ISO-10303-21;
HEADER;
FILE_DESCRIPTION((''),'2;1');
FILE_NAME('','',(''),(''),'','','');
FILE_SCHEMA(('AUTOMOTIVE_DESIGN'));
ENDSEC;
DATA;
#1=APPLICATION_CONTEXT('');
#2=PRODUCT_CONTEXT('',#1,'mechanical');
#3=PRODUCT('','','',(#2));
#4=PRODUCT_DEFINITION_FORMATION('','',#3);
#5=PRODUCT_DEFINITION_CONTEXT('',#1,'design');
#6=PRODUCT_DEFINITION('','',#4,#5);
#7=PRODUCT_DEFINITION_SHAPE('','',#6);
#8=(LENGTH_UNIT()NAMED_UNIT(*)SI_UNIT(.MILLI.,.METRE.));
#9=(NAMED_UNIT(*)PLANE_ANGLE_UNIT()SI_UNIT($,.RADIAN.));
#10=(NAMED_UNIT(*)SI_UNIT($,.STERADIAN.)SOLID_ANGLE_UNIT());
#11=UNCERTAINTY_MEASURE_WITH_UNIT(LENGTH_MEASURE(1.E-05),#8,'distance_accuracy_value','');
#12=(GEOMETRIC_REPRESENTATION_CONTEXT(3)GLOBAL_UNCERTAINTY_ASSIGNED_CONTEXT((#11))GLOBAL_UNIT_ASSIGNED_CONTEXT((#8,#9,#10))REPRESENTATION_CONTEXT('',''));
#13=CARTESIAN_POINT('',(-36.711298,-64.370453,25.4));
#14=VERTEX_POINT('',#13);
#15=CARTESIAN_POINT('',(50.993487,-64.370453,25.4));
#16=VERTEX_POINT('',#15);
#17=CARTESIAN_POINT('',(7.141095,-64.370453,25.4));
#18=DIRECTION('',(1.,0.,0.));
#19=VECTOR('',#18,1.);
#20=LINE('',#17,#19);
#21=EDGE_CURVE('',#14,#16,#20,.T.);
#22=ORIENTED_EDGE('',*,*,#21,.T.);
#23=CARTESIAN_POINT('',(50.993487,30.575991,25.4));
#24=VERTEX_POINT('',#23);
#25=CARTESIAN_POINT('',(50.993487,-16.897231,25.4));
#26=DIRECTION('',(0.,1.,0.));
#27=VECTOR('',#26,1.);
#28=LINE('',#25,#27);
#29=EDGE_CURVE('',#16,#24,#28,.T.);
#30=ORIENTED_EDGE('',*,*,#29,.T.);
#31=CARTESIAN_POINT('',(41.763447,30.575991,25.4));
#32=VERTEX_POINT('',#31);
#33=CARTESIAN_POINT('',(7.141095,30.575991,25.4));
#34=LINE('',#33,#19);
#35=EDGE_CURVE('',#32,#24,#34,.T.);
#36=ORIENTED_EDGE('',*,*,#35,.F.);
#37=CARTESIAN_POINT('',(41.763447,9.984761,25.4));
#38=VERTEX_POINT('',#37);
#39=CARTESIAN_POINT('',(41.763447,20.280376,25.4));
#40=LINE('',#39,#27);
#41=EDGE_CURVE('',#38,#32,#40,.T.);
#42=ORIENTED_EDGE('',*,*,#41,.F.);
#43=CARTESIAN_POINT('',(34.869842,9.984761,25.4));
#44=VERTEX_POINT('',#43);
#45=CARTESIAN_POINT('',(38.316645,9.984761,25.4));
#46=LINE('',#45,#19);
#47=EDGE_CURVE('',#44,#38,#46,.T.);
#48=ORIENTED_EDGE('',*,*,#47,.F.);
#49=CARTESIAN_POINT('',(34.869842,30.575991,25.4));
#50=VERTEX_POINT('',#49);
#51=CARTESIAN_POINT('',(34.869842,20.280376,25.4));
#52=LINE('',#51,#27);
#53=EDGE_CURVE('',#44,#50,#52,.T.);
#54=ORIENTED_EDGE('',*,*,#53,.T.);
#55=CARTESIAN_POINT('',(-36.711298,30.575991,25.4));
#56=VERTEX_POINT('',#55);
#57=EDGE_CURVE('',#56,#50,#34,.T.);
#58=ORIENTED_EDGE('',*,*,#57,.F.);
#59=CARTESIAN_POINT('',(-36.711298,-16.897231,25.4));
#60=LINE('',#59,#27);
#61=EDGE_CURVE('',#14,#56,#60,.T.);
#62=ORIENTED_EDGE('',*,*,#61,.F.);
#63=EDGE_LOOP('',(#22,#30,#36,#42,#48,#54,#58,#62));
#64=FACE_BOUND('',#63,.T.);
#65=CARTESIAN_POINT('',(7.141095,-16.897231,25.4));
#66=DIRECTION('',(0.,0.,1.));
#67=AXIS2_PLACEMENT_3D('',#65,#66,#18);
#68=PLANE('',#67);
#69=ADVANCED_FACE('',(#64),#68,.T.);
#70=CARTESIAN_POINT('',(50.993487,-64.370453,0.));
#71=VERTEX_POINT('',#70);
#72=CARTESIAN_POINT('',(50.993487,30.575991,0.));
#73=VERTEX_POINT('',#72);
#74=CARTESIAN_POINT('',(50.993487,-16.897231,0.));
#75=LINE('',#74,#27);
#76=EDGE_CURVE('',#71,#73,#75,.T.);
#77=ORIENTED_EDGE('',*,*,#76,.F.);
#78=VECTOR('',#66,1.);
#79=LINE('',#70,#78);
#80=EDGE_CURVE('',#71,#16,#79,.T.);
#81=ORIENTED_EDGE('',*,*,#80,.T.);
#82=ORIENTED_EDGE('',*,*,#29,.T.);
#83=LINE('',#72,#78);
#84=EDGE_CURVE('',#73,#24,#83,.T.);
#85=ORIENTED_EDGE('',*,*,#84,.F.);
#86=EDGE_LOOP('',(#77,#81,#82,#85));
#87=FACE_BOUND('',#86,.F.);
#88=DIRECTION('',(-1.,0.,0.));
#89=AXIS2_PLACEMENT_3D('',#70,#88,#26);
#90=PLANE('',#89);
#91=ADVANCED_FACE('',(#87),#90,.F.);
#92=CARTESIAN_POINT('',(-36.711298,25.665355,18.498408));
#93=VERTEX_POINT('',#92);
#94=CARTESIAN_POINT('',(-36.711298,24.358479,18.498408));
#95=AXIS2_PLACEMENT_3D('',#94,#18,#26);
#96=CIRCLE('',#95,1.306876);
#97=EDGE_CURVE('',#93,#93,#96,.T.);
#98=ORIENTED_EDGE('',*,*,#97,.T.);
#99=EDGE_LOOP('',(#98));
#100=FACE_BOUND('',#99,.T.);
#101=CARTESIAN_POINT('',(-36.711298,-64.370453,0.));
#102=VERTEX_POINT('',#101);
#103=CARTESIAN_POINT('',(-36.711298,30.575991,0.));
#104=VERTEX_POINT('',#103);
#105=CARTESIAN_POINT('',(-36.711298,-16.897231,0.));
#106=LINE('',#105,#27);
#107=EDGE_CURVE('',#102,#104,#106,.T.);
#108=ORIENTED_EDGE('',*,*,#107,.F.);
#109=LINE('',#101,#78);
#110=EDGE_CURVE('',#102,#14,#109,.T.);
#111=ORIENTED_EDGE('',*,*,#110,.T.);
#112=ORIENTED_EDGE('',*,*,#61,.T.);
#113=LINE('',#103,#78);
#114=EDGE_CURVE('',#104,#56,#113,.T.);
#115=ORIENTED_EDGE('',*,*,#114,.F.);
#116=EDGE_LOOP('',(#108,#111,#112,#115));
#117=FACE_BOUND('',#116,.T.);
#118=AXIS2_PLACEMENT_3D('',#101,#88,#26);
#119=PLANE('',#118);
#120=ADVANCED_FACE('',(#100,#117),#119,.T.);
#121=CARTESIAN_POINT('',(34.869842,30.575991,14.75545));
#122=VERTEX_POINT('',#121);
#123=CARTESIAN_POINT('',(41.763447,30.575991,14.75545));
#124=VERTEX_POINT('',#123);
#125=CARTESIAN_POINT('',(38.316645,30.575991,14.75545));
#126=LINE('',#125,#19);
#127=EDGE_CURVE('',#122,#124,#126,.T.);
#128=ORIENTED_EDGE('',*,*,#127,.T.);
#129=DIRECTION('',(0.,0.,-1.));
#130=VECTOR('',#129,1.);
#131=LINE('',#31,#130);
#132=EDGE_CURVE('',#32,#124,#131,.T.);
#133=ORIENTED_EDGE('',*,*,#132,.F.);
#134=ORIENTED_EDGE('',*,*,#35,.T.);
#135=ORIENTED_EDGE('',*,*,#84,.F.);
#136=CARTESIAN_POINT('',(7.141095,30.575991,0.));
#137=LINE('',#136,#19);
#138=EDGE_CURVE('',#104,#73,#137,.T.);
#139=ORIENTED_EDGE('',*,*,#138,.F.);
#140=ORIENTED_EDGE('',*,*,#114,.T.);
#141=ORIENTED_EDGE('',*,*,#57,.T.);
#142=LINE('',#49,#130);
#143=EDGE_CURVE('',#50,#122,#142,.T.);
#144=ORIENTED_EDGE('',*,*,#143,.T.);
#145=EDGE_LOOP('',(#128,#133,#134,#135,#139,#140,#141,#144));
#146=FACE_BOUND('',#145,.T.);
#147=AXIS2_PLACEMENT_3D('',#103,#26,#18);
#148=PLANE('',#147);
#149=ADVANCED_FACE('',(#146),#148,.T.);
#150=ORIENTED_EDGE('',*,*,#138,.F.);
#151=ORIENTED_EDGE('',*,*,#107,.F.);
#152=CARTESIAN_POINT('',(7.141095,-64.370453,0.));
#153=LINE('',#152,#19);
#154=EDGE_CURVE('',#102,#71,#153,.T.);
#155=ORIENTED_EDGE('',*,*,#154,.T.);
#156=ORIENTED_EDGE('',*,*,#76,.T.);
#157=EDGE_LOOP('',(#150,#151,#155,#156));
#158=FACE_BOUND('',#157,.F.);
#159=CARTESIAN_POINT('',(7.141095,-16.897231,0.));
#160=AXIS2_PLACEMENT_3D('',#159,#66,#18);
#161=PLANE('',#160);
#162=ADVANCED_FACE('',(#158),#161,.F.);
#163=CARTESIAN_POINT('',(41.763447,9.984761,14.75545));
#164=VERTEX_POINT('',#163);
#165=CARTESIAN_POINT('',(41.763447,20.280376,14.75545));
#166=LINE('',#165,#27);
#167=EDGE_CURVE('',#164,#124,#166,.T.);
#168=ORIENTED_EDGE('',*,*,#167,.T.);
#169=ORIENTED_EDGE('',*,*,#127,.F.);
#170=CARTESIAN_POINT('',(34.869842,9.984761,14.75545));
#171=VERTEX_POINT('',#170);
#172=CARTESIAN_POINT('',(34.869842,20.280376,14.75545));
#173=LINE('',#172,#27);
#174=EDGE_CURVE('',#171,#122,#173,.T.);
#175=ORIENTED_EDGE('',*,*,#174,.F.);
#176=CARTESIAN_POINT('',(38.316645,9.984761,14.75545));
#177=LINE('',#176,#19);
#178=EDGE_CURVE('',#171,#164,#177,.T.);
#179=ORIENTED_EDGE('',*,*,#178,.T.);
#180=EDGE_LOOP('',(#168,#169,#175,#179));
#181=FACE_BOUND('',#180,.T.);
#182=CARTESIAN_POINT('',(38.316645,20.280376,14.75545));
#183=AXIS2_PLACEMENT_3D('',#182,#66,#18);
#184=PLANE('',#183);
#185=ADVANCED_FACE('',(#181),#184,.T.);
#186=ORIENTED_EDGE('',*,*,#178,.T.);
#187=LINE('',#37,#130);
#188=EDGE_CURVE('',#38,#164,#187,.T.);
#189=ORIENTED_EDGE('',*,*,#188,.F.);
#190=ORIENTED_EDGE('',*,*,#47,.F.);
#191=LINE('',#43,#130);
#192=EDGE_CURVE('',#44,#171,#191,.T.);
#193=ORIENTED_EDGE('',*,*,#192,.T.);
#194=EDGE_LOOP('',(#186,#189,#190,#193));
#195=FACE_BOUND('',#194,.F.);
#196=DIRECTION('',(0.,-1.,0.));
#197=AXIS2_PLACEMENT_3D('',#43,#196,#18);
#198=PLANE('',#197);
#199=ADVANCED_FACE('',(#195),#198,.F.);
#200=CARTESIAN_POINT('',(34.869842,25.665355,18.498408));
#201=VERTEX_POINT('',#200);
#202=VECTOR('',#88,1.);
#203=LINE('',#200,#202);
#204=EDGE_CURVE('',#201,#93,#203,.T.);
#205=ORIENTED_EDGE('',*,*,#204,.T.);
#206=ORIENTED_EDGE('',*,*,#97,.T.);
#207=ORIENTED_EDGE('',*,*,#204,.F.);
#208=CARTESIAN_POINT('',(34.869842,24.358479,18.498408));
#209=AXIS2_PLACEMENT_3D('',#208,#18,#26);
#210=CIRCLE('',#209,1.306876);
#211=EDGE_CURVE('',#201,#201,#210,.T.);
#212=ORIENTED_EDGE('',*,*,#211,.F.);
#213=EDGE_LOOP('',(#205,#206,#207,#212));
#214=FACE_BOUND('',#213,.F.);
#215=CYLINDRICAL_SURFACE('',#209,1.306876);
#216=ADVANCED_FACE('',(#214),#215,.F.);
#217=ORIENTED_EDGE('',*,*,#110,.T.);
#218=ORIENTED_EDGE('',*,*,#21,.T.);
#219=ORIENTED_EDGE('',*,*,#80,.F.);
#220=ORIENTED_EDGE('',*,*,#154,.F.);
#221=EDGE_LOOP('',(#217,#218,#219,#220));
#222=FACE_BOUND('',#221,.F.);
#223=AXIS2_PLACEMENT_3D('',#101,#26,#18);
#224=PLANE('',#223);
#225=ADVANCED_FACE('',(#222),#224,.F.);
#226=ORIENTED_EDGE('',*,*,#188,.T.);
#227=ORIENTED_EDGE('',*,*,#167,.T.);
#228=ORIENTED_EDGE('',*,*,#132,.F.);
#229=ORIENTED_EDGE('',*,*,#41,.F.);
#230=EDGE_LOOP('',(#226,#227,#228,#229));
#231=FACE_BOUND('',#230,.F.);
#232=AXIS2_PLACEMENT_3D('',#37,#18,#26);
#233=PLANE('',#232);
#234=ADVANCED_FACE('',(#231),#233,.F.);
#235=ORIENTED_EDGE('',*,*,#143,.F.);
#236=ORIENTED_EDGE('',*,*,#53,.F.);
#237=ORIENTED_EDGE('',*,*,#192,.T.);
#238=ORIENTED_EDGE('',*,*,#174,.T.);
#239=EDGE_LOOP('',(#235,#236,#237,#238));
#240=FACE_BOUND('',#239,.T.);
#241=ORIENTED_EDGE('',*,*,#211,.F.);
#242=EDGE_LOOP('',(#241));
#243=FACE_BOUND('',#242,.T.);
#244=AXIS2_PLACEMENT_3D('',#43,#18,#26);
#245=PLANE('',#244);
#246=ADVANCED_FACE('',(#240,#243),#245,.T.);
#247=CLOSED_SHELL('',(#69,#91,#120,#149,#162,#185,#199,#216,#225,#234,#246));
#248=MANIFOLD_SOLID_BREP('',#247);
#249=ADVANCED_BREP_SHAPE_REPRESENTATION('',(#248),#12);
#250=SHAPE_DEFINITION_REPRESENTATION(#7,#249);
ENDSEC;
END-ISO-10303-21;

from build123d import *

# Parameters (mm, degrees)
F0_W     = 87.7047851682
F0_H     = 94.9464440346
F1_DEPTH = 25.4
F4_W     = 6.8936049938
F4_H     = 20.5912292004
F5_DEPTH = 10.6445495039
F6_R     = 1.3068757952
F7_DEPTH = 71.5821401606


# Not quite as in the source:
# - the program builds the solid bodies; features that only make, move or delete a surface that nothing else refers to are left out


with BuildPart() as f1:
    # F0 (on Top) → F1 (new body)
    with BuildSketch(Plane.XY):
        with Locations((7.1410946548, -16.8972313404)):
            Rectangle(F0_W, F0_H)
    extrude(amount=F1_DEPTH)

    # F4 (on face) → F5 (cut)
    with BuildSketch(Plane.XY.offset(25.4)):
        with Locations((38.3166447282, 20.2803760767)):
            Rectangle(F4_W, F4_H)
    extrude(amount=-F5_DEPTH, mode=Mode.SUBTRACT)

    # F6 (on face) → F7 (cut, through all)
    with BuildSketch(Plane.YZ.offset(34.8698422313)):
        with Locations((24.3584793061, 18.4984076768)):
            Circle(F6_R)
    extrude(amount=-F7_DEPTH, mode=Mode.SUBTRACT)


solid = f1.part
